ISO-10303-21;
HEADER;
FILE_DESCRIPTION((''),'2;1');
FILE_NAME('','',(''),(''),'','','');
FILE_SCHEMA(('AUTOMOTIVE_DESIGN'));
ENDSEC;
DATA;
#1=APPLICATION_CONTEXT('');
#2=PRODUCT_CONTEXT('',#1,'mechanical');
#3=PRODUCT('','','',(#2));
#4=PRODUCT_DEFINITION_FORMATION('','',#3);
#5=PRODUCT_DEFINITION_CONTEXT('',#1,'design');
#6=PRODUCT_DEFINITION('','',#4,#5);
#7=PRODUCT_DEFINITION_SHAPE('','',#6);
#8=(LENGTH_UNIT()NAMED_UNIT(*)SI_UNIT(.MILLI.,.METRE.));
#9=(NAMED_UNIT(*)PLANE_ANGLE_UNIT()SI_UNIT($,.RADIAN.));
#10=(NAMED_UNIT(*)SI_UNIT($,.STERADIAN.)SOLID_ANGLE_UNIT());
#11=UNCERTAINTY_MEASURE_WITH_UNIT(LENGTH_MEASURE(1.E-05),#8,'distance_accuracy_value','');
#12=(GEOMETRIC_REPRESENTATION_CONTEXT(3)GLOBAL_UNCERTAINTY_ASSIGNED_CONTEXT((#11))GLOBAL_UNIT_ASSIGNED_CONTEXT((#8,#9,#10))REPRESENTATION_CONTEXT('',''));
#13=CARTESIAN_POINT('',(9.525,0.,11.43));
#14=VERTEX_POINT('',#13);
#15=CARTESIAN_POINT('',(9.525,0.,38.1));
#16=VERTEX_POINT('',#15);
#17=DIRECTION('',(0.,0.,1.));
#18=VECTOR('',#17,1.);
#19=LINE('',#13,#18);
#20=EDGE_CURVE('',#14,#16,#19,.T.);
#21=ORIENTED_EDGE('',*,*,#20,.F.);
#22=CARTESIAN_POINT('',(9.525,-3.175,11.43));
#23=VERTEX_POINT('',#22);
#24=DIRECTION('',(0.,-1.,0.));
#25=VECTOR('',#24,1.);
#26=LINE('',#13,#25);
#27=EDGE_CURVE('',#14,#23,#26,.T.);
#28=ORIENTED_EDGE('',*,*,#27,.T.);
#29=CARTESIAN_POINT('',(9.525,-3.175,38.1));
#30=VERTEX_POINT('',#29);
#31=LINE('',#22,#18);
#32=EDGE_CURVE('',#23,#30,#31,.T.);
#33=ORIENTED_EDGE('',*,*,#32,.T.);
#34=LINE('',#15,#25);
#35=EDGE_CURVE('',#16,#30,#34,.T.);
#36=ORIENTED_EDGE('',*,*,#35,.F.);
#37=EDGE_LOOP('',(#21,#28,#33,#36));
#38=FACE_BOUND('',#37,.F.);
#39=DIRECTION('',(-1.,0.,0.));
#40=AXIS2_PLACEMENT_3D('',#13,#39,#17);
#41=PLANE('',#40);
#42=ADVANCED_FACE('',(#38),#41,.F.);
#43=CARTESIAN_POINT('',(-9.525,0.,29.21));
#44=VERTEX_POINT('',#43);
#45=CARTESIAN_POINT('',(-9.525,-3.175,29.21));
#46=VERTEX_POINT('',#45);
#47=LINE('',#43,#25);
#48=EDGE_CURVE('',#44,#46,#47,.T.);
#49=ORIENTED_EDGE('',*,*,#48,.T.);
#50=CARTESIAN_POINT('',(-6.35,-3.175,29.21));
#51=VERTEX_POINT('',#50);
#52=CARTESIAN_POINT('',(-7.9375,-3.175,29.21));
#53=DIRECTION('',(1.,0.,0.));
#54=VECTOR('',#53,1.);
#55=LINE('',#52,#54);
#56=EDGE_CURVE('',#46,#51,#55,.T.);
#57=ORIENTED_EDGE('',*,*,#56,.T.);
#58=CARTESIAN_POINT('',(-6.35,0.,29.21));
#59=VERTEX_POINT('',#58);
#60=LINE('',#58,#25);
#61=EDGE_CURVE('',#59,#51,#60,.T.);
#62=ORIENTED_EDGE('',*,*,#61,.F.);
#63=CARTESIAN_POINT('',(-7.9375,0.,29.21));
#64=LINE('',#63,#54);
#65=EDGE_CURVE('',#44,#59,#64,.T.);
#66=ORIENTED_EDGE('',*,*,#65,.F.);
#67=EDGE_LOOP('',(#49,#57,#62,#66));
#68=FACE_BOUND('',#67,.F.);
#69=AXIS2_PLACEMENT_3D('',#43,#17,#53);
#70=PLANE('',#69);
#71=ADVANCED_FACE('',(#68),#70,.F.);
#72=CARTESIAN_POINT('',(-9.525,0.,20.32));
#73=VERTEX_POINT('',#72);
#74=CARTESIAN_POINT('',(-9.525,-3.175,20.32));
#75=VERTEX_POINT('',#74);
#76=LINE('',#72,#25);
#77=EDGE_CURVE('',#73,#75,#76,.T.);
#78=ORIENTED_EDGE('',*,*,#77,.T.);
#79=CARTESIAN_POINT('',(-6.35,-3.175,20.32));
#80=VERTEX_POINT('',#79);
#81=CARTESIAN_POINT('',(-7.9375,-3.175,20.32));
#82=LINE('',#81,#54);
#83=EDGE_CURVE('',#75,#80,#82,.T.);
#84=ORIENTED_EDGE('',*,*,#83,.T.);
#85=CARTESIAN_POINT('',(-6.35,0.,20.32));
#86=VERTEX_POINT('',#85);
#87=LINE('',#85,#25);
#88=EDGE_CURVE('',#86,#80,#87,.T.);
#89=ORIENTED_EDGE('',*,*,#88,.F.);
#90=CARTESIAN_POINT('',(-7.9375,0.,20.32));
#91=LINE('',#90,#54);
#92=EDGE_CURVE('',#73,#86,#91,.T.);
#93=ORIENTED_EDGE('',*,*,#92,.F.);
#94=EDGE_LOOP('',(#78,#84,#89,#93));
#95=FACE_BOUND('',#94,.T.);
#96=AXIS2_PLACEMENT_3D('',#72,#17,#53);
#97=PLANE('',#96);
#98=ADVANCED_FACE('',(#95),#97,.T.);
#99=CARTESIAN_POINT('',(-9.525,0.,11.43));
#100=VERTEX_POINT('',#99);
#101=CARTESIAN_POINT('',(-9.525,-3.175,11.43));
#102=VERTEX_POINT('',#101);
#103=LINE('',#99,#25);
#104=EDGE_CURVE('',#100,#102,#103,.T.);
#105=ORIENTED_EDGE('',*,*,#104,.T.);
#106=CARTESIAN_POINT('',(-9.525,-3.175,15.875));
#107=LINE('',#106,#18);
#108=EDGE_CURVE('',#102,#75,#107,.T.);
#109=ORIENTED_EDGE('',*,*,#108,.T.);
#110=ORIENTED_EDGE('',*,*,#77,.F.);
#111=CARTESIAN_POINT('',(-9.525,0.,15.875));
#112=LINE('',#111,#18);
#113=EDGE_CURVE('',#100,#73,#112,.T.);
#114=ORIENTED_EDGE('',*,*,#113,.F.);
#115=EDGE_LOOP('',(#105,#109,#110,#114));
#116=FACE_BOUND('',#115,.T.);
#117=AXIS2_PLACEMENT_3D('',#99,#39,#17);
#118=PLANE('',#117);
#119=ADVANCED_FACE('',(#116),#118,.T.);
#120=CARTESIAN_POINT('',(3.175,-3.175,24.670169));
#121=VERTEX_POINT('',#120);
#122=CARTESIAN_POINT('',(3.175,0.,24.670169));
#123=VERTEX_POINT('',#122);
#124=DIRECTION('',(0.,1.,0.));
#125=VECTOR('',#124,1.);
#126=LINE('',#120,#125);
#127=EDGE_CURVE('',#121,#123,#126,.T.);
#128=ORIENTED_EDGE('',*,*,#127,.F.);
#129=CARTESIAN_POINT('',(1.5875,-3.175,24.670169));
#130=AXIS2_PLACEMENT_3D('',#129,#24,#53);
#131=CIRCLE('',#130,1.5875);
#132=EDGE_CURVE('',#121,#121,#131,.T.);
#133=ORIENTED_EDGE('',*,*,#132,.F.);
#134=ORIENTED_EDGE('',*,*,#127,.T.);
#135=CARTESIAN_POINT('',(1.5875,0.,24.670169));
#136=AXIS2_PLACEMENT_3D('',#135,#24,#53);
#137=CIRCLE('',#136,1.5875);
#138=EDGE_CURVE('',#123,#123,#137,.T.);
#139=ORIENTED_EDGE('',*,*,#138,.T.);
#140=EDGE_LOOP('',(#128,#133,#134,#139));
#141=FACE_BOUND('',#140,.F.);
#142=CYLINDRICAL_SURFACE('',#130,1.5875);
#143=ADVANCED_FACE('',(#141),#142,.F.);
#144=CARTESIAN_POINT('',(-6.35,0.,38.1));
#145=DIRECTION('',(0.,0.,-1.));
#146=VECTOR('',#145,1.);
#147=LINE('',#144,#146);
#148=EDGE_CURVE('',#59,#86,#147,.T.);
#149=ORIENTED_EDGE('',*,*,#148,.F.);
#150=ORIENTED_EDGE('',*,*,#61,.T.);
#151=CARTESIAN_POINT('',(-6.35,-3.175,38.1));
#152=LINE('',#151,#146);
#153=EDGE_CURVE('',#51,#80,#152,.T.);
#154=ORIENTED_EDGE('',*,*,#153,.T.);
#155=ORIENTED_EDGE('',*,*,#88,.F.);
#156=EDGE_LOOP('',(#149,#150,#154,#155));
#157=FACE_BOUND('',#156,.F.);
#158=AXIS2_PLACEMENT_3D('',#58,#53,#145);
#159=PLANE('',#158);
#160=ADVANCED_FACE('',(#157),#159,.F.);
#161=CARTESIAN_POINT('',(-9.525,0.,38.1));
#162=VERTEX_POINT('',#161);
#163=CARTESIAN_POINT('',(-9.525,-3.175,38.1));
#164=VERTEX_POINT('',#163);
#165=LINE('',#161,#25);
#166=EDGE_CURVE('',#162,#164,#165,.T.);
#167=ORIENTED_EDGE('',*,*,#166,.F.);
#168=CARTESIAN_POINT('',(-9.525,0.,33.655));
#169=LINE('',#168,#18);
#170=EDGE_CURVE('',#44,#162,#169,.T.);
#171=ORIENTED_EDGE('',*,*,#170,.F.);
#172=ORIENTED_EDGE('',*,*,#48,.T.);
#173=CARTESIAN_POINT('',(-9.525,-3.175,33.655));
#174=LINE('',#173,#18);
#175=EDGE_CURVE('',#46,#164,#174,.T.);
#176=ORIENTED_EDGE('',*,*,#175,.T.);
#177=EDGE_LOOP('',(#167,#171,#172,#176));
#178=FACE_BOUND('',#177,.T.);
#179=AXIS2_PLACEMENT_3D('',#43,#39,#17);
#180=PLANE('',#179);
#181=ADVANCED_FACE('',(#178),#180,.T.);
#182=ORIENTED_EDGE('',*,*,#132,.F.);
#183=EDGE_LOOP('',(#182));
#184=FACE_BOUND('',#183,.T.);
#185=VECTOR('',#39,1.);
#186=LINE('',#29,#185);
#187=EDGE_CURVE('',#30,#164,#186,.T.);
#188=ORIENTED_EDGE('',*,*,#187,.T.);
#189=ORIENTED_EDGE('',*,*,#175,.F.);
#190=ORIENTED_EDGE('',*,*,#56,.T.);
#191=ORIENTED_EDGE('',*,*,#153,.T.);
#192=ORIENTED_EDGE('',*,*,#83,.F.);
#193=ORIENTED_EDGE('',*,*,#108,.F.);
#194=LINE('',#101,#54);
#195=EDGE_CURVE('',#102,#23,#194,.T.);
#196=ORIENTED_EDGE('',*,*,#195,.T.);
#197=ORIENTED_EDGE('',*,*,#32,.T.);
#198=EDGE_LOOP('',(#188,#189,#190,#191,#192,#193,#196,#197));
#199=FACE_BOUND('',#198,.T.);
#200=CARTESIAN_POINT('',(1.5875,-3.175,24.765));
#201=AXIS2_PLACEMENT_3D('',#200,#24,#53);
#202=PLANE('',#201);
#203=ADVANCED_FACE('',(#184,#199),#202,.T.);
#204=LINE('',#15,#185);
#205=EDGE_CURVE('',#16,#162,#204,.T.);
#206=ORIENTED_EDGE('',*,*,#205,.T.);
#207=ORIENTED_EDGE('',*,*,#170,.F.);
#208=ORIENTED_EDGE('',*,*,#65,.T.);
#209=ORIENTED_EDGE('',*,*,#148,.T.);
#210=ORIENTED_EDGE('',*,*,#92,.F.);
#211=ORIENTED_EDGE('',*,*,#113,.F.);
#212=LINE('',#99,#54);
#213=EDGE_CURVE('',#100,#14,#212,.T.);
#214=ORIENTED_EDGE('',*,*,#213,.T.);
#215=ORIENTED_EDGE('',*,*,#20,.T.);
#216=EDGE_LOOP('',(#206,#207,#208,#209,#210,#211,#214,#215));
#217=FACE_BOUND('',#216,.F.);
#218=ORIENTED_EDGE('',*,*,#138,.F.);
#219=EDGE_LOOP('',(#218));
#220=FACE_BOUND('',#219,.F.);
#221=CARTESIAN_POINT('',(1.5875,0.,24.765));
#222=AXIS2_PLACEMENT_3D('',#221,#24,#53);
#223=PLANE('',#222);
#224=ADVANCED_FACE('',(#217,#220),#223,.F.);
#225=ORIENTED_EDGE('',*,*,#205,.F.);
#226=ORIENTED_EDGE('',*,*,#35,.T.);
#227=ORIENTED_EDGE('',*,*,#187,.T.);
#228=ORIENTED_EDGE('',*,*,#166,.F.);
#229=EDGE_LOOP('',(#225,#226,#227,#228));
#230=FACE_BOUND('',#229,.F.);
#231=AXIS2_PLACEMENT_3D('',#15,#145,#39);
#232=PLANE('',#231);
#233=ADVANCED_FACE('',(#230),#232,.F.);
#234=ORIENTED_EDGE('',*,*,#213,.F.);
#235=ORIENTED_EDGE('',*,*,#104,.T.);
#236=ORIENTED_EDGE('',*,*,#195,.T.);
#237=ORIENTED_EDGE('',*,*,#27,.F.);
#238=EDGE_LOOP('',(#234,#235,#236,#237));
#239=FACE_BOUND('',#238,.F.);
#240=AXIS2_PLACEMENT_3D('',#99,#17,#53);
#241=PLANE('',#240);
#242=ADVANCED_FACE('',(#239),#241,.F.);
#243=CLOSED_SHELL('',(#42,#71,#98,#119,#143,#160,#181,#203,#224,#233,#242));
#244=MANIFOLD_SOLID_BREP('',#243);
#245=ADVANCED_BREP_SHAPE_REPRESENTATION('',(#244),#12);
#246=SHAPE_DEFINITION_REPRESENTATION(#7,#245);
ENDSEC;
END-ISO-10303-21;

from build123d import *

# Parameters (mm, degrees)
F0_W     = 3.175
F0_H     = 8.89
F1_DEPTH = 3.175
F2_R     = 1.5875
F3_DEPTH = 3.176


# Not quite as in the source:
# - a feature names something its author has since deleted; it is built from what else it names


with BuildPart() as f1:
    # F0 (on Front) → F1 (new body)
    with BuildSketch(Plane.XZ):
        Polygon((9.525, 11.43), (9.525, 38.1), (-6.35, 38.1), (-6.35, 29.21), (-6.35, 20.32), (-6.35, 11.43), align=None)
        with Locations((-7.9375, 33.655)):
            Rectangle(F0_W, F0_H)
        with Locations((-7.9375, 15.875)):
            Rectangle(F0_W, F0_H)
    extrude(amount=F1_DEPTH)

    # F2 (on face) → F3 (cut, through all)
    with BuildSketch(Plane.XZ.offset(3.175)):
        with Locations((1.5875, 24.6701687584)):
            Circle(F2_R)
    extrude(amount=-F3_DEPTH, mode=Mode.SUBTRACT)


solid = f1.part
